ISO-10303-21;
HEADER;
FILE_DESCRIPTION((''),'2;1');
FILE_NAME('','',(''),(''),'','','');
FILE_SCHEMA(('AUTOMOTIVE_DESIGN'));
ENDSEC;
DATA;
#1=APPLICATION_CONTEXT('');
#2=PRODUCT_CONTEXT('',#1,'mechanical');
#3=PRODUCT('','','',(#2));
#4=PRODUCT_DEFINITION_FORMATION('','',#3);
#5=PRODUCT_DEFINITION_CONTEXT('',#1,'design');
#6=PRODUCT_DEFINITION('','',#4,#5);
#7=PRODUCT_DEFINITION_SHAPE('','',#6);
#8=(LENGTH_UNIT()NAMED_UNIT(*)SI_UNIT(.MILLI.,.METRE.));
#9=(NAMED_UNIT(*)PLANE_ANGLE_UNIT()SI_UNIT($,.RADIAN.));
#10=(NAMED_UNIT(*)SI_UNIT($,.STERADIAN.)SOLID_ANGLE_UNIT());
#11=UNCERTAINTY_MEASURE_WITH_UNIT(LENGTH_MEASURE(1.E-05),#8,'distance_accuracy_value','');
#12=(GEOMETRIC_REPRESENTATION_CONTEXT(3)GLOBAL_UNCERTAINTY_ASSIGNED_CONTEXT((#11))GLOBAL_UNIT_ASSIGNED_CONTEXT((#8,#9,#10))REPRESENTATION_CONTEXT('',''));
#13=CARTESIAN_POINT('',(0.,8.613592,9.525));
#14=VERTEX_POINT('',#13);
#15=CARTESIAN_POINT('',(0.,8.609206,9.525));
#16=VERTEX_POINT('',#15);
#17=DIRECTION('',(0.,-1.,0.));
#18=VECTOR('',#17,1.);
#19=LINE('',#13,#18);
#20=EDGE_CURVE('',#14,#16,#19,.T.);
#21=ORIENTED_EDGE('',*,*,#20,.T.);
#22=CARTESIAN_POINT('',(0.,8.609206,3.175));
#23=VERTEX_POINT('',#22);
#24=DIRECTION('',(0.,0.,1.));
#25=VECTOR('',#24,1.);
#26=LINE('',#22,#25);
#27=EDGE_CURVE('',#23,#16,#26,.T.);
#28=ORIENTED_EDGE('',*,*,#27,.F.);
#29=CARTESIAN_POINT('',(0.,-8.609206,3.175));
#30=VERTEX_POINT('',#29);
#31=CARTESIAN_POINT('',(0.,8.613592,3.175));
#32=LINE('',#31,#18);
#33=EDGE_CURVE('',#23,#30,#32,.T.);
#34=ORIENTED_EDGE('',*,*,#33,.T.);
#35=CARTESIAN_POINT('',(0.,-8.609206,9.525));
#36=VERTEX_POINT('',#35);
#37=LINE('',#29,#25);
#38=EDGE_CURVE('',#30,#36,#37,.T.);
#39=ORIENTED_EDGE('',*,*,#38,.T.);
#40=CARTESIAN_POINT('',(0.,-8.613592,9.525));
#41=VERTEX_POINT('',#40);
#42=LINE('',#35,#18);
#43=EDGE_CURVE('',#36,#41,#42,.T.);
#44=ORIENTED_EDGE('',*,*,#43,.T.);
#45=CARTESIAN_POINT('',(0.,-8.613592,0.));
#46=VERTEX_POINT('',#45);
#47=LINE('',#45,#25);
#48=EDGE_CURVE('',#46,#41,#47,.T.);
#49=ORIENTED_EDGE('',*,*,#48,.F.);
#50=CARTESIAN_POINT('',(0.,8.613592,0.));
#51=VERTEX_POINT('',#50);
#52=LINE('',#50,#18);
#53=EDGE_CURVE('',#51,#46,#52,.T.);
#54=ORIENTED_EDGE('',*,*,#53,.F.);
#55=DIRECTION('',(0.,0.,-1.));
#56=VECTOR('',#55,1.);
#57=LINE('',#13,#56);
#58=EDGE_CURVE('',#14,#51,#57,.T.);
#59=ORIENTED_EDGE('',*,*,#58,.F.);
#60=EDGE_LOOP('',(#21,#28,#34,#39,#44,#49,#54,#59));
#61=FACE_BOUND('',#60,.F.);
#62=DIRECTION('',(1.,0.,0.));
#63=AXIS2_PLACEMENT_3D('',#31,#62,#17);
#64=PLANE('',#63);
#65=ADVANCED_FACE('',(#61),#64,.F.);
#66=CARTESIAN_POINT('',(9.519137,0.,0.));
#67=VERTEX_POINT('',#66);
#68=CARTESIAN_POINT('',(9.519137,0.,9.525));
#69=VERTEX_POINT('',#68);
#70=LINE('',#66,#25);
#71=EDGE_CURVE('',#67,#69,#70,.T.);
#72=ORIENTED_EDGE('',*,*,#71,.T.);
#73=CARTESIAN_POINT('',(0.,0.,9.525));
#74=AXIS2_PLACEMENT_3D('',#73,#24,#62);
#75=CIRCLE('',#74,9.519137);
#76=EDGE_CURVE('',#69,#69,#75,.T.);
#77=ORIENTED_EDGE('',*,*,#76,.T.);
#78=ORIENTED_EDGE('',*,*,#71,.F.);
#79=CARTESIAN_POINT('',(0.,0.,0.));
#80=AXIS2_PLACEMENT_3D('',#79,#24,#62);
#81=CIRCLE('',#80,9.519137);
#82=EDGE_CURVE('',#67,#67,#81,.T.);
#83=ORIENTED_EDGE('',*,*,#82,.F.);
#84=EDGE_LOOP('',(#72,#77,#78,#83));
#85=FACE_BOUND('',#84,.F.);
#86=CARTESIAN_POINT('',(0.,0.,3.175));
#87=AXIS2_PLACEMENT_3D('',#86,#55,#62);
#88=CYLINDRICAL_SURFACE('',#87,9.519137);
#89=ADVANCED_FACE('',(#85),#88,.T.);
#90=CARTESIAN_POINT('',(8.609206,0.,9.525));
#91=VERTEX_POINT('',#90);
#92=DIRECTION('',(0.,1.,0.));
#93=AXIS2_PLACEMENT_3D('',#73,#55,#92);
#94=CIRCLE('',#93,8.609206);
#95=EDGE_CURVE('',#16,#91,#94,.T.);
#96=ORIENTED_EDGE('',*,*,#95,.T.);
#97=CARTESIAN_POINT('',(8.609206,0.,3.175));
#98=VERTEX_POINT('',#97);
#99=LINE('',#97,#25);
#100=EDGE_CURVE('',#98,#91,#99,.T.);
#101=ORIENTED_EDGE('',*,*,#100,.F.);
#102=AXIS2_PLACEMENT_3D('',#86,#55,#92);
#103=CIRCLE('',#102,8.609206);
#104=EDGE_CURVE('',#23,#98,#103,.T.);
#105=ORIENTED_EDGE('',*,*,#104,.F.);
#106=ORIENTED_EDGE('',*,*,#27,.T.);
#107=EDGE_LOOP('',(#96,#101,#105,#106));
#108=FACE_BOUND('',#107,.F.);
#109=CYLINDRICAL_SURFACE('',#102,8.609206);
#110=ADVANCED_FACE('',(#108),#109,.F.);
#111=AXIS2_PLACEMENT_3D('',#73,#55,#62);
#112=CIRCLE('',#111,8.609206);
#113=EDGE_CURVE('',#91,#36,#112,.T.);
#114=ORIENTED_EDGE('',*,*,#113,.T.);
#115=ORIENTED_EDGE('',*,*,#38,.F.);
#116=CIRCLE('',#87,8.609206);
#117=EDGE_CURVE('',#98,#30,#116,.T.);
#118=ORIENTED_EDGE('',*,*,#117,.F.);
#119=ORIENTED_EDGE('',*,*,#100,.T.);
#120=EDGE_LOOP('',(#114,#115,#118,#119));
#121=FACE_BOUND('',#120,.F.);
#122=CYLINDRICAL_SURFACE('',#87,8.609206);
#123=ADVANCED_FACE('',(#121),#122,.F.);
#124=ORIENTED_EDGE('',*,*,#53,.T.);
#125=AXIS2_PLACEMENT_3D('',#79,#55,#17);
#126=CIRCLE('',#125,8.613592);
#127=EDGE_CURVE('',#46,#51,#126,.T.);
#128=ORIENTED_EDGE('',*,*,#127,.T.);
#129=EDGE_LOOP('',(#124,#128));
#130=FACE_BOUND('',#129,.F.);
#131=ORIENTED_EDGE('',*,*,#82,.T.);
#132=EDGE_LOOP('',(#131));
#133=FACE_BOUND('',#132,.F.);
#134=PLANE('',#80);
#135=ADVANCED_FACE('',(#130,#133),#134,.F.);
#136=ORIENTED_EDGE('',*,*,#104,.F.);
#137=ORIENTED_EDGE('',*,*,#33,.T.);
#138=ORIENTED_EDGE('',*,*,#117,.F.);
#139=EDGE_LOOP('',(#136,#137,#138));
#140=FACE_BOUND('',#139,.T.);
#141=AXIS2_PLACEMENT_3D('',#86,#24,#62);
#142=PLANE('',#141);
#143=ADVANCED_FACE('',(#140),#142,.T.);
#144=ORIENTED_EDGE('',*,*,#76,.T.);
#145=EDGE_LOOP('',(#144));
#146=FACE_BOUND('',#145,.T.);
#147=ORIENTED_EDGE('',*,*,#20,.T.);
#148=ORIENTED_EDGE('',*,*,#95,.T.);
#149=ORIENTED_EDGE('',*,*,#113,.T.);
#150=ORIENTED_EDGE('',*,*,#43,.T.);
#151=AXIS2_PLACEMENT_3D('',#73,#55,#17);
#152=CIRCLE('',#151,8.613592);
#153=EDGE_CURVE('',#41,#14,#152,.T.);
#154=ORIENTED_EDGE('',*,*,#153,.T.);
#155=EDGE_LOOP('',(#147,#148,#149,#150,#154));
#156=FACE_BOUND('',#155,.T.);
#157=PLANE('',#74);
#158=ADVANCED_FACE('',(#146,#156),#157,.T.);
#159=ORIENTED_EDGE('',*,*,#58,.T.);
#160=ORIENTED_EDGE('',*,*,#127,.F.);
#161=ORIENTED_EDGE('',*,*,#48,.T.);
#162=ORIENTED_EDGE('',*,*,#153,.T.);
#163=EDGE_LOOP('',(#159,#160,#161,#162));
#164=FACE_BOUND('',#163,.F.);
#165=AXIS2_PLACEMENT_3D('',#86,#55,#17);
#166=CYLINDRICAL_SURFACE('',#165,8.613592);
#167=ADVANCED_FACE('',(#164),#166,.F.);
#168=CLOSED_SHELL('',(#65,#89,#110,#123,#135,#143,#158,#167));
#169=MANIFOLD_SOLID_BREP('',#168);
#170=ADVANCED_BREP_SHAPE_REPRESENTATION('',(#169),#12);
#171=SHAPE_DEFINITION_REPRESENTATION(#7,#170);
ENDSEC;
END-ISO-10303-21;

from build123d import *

# Parameters (mm, degrees)
F0_R     = 9.5191370384
F1_DEPTH = 3.175
F2_R     = 9.5191370384
F3_DEPTH = 6.35


with BuildPart() as f1:
    # F0 (on Top) → F1 (new body)
    with BuildSketch(Plane.XY):
        Circle(F0_R)
        with BuildLine():
            ThreePointArc((0, 8.6135921563), (6.0907294241, 6.0907294241), (8.6135921563, 0))
            ThreePointArc((8.6135921563, 0), (6.0907294241, -6.0907294241), (0, -8.6135921563))
            ThreePointArc((0, -8.6135921563), (-8.6135921563, 0), (0, 8.6135921563))
        make_face(mode=Mode.SUBTRACT)
        with BuildLine():
            ThreePointArc((0, -8.6135921563), (6.0907294241, -6.0907294241), (8.6135921563, 0))
            ThreePointArc((8.6135921563, 0), (6.0907294241, 6.0907294241), (0, 8.6135921563))
            Line((0, 8.6135921563), (0, -8.6135921563))
        make_face()
    extrude(amount=F1_DEPTH)

    # F2 (on face) → F3 (join)
    with BuildSketch(Plane.XY.offset(3.175)):
        Circle(F2_R)
        with BuildLine():
            ThreePointArc((0, 8.6092061915), (6.0876280786, 6.0876280786), (8.6092061915, 0))
            ThreePointArc((8.6092061915, 0), (6.0876280786, -6.0876280786), (0, -8.6092061915))
            Line((0, -8.6092061915), (0, -8.6135921563))
            ThreePointArc((0, -8.6135921563), (-8.6135921563, 0), (0, 8.6135921563))
            Line((0, 8.6135921563), (0, 8.6092061915))
        make_face(mode=Mode.SUBTRACT)
    extrude(amount=F3_DEPTH)


solid = f1.part
